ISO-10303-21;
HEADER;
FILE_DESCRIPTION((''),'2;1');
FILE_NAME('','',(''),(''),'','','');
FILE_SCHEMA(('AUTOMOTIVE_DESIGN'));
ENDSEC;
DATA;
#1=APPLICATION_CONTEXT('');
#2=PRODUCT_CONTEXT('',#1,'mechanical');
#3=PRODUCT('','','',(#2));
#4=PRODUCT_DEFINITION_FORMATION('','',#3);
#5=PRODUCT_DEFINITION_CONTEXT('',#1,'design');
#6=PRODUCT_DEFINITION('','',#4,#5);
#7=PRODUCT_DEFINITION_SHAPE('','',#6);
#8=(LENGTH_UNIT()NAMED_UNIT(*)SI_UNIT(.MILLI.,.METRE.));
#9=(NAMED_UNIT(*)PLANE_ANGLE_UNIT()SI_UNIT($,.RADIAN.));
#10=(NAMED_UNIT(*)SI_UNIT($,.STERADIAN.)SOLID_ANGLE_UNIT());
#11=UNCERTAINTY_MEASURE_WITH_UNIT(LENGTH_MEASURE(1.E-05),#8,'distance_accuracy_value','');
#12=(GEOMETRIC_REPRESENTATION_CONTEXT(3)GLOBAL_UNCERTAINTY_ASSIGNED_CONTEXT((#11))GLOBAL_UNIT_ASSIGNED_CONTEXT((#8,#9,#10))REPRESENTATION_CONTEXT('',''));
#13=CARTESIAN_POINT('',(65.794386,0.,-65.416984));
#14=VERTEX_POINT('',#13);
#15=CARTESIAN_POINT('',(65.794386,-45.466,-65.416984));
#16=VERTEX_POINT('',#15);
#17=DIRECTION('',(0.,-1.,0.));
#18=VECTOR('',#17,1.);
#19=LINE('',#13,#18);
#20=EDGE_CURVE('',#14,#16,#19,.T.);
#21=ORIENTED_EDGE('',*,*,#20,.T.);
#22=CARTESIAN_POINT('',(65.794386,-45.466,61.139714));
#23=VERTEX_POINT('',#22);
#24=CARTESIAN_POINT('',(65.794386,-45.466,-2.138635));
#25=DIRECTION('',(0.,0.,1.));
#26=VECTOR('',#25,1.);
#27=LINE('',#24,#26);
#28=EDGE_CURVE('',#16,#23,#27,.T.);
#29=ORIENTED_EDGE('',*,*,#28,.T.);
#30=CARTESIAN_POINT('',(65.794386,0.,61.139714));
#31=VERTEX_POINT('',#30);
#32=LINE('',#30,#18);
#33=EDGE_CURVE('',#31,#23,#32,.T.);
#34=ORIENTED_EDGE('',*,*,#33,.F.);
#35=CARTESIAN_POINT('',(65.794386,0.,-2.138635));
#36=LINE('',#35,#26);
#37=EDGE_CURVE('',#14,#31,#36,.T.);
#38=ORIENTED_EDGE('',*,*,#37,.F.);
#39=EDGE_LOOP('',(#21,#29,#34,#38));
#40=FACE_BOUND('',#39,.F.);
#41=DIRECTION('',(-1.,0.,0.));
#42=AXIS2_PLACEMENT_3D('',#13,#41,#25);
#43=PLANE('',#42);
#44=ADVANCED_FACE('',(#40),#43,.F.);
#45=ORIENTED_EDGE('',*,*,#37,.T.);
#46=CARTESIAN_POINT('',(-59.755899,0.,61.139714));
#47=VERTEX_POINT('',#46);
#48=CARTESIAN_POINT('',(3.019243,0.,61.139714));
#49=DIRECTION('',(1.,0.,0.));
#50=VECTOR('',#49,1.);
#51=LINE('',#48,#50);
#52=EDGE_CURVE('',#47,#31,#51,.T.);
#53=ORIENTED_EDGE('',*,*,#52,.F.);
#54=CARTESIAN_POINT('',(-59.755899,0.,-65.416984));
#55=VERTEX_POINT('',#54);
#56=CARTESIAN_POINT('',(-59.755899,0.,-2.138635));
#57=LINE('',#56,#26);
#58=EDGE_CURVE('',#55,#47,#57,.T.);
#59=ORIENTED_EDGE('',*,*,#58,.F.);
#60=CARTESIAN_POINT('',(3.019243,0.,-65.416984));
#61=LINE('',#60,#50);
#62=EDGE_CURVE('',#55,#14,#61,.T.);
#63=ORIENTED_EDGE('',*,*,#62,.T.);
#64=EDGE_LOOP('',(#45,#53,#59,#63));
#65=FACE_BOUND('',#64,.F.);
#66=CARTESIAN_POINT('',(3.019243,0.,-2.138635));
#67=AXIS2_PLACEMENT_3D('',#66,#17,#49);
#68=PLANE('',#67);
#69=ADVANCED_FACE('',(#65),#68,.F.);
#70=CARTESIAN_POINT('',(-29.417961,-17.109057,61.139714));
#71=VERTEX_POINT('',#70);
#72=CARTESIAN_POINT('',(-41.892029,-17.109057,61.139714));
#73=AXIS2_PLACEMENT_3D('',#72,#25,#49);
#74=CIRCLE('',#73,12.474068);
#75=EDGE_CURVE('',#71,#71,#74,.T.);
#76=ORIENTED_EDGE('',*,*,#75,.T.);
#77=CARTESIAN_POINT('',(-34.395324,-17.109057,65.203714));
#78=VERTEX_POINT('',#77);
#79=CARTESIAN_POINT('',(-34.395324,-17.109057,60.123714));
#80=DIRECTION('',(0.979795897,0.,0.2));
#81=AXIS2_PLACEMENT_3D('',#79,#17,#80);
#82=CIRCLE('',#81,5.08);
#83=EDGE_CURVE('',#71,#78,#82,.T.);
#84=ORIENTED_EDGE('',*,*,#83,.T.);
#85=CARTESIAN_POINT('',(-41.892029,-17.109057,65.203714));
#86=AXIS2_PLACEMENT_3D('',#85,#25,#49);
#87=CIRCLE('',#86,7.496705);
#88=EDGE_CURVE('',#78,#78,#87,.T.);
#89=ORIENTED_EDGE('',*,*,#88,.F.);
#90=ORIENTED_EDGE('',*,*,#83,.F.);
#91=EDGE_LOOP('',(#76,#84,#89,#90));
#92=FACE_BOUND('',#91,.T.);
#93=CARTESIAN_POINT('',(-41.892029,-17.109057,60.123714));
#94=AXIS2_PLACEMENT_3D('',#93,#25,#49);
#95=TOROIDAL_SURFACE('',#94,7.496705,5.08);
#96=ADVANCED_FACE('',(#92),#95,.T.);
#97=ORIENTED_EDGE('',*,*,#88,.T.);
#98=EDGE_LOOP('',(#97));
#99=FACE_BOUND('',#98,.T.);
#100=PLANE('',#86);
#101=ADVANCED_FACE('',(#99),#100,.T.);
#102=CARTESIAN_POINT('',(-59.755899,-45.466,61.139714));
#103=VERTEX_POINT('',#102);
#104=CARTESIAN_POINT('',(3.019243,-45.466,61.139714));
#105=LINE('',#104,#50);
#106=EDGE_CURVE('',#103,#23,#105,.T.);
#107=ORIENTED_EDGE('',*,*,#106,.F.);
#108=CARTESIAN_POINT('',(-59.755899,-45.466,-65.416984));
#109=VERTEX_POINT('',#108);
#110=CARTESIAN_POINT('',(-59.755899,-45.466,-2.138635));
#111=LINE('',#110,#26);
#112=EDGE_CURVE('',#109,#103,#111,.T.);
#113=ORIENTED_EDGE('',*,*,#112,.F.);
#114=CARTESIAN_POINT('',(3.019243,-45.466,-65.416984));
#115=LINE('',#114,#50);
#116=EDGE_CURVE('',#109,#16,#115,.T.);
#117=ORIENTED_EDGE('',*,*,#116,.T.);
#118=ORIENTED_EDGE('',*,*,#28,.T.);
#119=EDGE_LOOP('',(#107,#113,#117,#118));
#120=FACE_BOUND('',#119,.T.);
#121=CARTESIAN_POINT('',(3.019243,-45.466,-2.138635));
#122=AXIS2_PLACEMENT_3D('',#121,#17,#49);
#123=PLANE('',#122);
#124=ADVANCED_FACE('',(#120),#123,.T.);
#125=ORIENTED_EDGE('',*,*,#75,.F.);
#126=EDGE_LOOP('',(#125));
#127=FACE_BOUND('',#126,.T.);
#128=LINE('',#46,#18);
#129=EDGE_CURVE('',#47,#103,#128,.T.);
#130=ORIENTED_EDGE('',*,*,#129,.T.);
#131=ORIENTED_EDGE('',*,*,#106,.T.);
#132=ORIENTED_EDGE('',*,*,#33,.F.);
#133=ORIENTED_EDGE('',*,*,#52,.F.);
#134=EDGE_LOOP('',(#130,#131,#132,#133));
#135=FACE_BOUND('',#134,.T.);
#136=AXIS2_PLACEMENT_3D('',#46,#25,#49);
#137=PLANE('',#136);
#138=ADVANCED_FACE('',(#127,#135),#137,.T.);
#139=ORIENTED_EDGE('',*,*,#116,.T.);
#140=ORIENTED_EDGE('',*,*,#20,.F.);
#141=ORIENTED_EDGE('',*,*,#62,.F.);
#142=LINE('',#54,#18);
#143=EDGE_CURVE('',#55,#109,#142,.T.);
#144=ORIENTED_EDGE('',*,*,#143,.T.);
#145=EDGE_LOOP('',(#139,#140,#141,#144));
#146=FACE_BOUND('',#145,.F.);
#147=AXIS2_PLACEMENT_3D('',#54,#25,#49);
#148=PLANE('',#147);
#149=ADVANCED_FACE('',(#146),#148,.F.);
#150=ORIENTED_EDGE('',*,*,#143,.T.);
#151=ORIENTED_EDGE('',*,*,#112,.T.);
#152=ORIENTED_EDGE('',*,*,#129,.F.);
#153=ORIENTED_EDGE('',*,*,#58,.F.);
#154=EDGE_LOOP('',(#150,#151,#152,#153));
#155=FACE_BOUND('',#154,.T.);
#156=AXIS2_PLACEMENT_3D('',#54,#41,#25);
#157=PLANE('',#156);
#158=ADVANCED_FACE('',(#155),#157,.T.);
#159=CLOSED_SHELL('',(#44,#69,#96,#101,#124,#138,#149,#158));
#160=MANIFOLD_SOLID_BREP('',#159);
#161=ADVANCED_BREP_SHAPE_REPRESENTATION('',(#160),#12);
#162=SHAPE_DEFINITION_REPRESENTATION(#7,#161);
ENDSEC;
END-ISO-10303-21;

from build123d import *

# Parameters (mm, degrees)
F0_W     = 125.5502849817
F0_H     = 126.5566982329
F1_DEPTH = 45.466
F2_R     = 12.4740683963
F3_DEPTH = 4.064


# Not quite as in the source:
# - a fillet or chamfer that OpenCascade refuses, or shapes differently, is made with other operations: its cross-section is extruded or revolved along the edge and cut away or added


with BuildPart() as f1:
    # F0 (on Front) → F1 (new body)
    with BuildSketch(Plane.XZ):
        with Locations((3.0192434788, -2.1386351436)):
            Rectangle(F0_W, F0_H)
    extrude(amount=F1_DEPTH)

    # F2 (on face) → F3 (join)
    with BuildSketch(Plane.XY.offset(61.1397139728)):
        with Locations((-41.892029345, -17.1090569347)):
            Circle(F2_R)
    extrude(amount=F3_DEPTH)

    # F4: fillet of radius 5.08 on 1 edges, made by hand

    # F4_s1 → F4_t2 (revolve, cut)
    with BuildSketch(Plane.XZ.offset(17.1090569347)):
        with BuildLine():
            ThreePointArc((-29.4179609488, 61.1397139728), (-31.1824500034, 64.0586650526), (-34.3953241061, 65.2037139728))
            Line((-34.3953241061, 65.2037139728), (-29.4179609488, 65.2037139728))
            Line((-29.4179609488, 65.2037139728), (-29.4179609488, 61.1397139728))
        make_face()
    revolve(axis=Axis((-41.892029345, -17.1090569347, 65.2037139728), (0, 0, 1)), mode=Mode.SUBTRACT)


solid = f1.part
